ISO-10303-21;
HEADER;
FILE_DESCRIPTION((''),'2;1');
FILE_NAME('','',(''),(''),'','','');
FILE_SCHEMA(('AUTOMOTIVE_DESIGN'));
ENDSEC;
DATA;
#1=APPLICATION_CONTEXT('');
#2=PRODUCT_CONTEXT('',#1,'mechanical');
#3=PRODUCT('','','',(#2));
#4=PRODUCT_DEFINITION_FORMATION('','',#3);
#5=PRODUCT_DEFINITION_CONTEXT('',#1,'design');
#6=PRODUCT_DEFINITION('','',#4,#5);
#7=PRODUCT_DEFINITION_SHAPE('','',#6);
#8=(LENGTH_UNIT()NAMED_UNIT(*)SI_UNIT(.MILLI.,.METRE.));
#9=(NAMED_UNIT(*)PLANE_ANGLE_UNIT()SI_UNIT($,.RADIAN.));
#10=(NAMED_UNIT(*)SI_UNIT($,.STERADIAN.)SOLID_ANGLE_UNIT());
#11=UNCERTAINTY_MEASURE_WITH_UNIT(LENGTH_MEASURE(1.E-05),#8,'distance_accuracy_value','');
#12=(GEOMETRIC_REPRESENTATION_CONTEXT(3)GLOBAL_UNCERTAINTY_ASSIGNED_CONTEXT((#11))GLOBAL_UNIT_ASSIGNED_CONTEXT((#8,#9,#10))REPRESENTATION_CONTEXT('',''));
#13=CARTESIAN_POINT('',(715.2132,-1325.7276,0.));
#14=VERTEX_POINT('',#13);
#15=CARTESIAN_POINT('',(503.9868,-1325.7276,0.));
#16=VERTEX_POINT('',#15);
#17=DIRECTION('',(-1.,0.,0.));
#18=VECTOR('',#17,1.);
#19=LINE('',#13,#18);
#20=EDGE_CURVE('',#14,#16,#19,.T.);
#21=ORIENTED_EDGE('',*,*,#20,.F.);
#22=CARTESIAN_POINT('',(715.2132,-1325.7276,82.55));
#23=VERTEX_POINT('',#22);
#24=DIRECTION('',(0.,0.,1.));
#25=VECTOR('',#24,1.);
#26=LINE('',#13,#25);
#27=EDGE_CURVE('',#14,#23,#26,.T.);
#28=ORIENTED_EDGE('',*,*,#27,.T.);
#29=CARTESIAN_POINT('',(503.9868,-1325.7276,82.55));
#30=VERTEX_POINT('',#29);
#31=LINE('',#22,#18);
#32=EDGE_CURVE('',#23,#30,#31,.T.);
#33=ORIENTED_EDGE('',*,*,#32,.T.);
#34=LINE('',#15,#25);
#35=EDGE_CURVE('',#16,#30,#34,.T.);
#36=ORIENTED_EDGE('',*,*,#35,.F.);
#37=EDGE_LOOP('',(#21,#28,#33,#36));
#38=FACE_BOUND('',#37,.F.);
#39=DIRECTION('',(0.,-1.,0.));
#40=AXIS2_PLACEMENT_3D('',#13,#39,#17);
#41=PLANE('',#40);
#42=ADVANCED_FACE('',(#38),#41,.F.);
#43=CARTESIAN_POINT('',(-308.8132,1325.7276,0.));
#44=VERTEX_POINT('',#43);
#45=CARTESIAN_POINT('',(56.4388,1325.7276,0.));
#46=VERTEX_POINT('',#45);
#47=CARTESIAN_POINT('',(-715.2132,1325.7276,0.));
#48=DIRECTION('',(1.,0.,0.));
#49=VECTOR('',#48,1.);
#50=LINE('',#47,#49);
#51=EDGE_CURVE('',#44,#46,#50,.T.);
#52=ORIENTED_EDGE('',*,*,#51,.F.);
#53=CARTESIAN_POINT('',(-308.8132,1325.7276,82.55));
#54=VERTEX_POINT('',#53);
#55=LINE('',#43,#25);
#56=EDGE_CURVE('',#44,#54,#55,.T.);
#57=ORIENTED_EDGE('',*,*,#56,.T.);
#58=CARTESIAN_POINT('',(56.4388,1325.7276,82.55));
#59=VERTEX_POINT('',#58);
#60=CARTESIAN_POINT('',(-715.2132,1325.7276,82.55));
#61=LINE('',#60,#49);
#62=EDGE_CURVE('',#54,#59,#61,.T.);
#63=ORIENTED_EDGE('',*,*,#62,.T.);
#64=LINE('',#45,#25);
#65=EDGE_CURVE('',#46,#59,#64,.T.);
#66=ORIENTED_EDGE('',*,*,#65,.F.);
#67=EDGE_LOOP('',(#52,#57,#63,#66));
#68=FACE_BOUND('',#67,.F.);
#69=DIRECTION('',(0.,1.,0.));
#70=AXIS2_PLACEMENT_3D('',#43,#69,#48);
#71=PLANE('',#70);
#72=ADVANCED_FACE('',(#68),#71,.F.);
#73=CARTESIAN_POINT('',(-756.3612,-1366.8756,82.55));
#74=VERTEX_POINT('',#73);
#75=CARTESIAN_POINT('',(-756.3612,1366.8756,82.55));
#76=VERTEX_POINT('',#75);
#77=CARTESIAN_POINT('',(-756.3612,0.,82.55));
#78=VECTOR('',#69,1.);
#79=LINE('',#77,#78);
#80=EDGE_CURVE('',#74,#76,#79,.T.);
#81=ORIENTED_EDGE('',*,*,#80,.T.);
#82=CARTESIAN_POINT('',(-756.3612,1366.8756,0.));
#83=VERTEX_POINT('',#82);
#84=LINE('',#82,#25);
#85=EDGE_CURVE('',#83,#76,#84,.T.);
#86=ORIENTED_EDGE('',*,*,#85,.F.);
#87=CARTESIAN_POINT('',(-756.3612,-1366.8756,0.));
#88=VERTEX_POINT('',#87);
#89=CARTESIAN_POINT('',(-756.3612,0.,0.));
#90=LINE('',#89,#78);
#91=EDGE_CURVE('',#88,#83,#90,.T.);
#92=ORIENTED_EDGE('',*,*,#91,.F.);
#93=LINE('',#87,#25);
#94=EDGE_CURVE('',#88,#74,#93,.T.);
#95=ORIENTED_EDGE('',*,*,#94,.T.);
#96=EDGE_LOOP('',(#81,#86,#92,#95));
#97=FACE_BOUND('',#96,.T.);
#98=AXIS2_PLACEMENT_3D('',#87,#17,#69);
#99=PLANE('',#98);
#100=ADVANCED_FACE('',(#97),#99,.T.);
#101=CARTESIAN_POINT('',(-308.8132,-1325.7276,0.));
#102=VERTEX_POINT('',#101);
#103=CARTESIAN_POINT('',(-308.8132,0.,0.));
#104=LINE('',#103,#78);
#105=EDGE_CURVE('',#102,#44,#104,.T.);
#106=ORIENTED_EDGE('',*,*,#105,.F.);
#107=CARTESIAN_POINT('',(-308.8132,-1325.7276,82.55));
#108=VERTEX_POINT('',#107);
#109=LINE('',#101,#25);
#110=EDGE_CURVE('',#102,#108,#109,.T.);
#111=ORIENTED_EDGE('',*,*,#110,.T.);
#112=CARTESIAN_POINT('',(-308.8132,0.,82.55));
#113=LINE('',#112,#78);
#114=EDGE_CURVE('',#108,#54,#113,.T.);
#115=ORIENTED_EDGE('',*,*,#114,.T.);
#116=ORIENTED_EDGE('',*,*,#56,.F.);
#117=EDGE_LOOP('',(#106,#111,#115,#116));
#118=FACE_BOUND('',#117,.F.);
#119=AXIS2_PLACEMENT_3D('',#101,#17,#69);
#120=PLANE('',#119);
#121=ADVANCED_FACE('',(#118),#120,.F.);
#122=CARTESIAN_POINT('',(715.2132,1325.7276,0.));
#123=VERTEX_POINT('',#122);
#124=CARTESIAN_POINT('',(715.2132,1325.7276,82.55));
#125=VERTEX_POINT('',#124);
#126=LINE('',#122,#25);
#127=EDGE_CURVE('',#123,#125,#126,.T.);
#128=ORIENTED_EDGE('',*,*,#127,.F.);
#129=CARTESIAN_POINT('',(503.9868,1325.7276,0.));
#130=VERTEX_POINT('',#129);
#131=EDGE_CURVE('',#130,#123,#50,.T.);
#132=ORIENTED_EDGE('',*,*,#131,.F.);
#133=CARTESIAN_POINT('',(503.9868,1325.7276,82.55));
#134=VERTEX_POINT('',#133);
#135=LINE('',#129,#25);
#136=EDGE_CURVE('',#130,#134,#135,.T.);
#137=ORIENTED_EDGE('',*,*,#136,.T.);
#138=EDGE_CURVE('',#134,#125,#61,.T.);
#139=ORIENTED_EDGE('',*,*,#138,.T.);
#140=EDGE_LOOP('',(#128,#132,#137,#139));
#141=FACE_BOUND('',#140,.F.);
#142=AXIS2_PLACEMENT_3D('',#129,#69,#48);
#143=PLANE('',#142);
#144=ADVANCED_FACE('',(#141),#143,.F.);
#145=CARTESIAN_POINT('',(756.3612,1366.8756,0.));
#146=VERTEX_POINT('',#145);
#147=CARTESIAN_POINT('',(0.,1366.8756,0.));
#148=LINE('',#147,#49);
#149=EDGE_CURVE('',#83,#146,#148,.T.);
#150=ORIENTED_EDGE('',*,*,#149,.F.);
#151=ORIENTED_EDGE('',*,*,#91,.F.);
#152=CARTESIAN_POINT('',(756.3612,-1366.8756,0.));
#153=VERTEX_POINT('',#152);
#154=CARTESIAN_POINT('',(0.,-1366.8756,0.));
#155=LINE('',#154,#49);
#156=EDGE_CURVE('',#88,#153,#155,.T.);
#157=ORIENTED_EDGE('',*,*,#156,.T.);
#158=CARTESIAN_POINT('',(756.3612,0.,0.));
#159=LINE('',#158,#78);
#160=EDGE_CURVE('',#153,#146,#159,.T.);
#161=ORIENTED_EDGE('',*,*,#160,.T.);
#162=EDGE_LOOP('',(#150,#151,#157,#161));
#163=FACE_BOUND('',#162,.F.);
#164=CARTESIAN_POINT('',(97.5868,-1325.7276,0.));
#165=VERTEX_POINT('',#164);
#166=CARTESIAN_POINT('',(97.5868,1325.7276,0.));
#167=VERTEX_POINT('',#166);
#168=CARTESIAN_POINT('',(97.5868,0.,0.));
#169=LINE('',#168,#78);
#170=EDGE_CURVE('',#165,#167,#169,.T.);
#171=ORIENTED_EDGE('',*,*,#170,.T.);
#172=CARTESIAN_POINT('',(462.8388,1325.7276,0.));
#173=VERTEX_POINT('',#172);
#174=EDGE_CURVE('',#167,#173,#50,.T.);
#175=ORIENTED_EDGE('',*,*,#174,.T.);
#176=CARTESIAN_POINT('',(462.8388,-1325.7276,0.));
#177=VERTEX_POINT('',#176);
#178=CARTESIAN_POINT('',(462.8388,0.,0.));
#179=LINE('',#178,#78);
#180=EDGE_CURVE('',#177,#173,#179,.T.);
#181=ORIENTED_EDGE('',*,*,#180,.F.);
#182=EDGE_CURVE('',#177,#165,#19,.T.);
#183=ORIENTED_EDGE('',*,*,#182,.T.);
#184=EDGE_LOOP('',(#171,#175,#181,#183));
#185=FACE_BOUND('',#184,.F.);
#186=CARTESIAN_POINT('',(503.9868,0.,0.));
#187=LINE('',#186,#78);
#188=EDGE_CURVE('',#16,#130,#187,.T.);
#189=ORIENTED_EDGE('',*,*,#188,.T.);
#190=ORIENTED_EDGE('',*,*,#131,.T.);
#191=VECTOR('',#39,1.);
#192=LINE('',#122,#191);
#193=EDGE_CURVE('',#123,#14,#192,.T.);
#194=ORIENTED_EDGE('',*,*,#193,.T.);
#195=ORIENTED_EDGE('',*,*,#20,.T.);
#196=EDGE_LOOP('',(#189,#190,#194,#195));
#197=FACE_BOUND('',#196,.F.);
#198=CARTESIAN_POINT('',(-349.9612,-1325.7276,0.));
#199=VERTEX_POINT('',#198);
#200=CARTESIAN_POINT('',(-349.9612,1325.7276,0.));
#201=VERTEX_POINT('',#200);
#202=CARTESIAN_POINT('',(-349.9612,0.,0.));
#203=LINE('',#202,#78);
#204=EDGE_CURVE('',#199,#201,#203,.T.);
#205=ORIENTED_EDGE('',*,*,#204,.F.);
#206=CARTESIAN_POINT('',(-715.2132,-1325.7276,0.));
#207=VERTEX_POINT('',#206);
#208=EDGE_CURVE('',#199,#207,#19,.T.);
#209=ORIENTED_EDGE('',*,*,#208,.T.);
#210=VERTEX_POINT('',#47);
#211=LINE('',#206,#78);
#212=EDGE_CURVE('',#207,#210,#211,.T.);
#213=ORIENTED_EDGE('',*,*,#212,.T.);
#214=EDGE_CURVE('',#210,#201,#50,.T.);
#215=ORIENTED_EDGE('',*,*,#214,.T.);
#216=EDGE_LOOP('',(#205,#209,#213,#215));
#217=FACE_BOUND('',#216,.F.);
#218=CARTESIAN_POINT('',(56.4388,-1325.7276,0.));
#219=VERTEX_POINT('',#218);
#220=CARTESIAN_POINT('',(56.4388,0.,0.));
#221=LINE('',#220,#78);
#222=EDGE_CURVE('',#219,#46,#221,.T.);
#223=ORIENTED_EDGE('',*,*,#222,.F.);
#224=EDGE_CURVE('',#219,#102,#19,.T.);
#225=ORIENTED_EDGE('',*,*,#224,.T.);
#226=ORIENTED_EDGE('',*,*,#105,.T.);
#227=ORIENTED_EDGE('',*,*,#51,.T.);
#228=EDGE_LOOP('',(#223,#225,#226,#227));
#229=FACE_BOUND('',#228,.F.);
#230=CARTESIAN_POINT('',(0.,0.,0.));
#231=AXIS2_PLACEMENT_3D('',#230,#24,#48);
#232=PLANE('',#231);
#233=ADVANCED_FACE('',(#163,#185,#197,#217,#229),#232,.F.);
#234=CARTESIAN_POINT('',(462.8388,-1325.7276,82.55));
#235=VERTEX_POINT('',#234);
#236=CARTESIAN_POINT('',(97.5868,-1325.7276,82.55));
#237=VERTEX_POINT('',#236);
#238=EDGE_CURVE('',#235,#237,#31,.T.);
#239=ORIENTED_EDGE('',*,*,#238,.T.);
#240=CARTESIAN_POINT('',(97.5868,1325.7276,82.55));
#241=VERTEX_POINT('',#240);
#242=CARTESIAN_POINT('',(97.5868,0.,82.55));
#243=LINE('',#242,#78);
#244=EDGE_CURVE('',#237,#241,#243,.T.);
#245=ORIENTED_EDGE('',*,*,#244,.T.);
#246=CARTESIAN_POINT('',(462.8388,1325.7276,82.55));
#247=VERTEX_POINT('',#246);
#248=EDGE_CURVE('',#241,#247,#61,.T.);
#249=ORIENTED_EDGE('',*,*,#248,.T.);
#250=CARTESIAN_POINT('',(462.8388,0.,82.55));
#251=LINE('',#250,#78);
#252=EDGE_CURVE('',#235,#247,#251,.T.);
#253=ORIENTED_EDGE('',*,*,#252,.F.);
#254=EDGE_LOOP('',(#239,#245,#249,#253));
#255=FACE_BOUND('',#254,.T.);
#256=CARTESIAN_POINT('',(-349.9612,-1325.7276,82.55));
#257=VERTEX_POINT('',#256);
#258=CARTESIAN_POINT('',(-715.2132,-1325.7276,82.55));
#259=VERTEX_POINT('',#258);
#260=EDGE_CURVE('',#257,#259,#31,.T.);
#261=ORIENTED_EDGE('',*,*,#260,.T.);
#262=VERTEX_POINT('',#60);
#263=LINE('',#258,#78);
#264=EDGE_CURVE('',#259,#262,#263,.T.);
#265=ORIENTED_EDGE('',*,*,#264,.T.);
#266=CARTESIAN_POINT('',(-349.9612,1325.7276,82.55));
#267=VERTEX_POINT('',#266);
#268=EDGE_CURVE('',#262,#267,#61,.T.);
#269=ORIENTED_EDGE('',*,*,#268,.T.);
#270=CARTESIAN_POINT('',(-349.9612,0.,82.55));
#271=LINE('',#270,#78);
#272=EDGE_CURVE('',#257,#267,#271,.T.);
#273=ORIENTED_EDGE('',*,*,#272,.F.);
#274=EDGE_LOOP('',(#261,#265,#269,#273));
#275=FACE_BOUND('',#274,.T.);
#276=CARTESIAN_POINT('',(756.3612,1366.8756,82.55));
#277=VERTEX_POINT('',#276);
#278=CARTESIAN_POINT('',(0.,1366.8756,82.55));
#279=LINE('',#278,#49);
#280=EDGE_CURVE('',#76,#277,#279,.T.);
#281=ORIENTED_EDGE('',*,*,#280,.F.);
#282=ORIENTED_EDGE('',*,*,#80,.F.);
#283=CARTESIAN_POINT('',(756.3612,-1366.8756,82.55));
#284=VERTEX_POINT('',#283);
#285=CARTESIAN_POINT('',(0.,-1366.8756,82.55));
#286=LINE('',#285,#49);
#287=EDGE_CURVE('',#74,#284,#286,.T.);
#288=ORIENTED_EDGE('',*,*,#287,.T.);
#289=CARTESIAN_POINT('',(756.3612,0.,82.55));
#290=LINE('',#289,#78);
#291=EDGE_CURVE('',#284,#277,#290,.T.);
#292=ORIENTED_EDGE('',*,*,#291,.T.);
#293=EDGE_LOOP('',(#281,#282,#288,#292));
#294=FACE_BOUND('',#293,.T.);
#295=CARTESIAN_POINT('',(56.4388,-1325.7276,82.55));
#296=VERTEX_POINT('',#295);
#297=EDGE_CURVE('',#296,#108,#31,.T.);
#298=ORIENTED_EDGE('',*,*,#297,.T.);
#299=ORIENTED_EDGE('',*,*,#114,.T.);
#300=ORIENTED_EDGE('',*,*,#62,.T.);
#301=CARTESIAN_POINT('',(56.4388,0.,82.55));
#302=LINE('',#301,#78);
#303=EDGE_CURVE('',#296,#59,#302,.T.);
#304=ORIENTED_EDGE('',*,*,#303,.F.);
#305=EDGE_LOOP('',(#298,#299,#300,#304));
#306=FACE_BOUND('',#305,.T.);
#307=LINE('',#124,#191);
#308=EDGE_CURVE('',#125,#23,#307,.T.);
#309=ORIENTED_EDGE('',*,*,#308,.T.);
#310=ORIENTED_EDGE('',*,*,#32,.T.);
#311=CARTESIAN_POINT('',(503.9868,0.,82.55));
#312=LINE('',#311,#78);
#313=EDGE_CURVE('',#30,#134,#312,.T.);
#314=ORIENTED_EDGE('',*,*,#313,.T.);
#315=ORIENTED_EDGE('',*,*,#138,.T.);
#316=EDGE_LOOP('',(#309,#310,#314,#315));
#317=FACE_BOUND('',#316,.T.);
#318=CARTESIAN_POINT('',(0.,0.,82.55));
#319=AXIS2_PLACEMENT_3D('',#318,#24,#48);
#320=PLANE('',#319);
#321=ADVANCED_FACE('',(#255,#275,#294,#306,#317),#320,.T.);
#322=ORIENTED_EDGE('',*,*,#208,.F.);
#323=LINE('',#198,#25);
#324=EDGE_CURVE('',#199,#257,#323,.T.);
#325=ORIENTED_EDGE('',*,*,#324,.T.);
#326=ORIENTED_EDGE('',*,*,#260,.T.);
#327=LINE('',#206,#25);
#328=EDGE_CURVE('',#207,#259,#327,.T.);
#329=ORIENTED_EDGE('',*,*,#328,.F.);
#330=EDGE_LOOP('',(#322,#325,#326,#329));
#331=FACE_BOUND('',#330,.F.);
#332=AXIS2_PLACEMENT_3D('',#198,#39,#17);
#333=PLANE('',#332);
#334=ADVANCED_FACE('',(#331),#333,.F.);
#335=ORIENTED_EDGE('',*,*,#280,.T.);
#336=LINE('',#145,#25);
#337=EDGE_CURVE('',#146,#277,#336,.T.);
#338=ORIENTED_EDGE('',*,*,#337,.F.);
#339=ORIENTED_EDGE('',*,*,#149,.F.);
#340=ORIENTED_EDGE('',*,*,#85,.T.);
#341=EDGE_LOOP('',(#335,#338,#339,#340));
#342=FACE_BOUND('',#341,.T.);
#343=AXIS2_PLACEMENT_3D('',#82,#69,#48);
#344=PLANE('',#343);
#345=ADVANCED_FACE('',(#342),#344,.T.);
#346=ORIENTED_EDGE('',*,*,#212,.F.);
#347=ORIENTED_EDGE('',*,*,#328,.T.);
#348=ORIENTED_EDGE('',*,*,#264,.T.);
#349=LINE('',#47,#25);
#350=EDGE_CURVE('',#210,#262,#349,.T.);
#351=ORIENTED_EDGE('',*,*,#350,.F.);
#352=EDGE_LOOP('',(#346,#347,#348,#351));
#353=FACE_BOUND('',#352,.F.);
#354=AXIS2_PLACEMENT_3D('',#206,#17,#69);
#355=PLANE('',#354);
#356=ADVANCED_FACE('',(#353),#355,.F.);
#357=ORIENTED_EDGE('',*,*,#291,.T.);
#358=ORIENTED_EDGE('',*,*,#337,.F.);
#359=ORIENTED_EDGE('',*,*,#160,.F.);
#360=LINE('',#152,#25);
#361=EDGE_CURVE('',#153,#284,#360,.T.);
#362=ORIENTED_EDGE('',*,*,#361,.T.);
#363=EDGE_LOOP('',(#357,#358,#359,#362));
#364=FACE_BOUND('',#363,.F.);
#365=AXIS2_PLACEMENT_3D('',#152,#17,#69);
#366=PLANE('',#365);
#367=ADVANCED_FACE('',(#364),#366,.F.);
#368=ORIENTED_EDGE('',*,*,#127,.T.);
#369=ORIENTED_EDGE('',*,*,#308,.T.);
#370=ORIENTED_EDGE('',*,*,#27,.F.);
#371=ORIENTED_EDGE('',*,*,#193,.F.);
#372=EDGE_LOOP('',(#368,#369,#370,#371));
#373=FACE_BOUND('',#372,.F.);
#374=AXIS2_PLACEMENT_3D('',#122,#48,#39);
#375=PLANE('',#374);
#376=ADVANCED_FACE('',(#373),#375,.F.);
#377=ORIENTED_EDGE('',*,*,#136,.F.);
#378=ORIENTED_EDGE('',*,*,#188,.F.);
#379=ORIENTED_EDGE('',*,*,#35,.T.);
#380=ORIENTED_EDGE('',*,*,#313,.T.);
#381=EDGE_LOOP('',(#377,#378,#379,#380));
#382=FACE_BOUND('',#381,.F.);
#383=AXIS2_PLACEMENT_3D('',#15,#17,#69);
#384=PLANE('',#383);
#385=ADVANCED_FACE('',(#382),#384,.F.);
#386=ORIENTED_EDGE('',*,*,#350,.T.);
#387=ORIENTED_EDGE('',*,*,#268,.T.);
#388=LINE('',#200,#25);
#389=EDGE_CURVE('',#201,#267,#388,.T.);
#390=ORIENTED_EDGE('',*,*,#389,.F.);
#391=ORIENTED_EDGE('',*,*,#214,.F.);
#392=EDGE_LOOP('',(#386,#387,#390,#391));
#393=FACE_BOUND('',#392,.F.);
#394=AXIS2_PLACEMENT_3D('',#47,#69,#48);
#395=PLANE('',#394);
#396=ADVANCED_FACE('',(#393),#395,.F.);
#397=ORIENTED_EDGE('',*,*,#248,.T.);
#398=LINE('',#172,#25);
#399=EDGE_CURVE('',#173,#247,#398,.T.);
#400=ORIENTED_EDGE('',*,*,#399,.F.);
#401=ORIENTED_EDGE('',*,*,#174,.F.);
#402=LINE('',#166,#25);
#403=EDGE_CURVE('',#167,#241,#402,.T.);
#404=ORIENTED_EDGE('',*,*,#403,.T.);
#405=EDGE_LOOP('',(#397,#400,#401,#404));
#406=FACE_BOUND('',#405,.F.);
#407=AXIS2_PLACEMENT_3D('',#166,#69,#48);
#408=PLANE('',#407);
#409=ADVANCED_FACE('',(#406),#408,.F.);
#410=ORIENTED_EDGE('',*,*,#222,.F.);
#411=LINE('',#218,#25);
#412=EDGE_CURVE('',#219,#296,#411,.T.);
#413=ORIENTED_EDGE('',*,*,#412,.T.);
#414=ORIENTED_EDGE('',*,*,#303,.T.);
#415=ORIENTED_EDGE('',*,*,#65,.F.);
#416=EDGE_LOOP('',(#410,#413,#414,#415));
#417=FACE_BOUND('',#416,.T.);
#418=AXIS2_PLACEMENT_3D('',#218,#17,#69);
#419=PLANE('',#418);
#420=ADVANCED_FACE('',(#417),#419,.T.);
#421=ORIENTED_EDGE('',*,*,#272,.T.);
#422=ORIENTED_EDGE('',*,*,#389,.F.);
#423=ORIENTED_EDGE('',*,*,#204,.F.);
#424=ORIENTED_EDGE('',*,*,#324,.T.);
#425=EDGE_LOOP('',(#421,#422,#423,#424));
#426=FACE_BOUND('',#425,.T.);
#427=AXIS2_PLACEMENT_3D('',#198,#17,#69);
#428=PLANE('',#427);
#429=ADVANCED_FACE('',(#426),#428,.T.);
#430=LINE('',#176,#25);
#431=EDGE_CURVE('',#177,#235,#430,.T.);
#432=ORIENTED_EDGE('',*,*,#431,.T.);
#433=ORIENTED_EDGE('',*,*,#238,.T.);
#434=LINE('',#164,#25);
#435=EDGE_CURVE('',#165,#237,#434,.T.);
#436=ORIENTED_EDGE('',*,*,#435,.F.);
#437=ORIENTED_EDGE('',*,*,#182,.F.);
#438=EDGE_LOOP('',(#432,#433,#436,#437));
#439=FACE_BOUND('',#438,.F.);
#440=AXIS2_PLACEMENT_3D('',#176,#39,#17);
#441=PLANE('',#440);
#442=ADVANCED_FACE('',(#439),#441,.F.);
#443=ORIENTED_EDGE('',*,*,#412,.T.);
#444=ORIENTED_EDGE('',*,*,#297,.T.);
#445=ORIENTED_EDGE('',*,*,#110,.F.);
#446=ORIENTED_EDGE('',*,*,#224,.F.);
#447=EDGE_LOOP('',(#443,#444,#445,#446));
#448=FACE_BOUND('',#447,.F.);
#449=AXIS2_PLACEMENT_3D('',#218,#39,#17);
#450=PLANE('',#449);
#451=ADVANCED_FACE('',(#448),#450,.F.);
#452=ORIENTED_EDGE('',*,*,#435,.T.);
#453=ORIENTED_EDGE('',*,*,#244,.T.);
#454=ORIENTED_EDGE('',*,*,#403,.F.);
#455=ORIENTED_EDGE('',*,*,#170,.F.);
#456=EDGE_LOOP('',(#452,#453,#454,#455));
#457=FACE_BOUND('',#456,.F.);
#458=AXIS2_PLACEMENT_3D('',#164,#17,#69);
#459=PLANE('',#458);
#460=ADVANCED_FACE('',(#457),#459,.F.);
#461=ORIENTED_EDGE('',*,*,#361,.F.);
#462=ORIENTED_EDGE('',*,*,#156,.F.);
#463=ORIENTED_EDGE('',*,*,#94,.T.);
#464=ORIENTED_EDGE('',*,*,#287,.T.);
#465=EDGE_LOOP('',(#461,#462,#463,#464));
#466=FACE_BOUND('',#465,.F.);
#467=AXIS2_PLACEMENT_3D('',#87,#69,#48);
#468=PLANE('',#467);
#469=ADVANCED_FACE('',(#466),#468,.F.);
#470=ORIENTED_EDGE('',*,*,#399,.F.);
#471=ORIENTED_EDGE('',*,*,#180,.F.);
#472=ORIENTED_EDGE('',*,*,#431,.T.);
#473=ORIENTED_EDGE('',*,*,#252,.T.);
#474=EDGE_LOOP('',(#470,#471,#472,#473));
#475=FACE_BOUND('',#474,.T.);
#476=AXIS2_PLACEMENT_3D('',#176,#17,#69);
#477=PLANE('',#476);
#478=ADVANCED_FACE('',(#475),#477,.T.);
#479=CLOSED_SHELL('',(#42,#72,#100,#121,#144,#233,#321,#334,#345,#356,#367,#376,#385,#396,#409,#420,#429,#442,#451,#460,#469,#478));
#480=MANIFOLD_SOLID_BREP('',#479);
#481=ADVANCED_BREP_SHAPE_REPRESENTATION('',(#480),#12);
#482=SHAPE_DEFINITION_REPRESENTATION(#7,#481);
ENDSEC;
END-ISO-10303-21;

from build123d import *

# Parameters (mm, degrees)
F0_W     = 1512.7224
F0_H     = 2733.7512
F0_W_2   = 41.148
F0_H_2   = 2651.4552
F1_DEPTH = 82.55


# Not quite as in the source:
# - a feature names something its author has since deleted; it is built from what else it names


with BuildPart() as f1:
    # F0 (on Top) → F1 (new body)
    with BuildSketch(Plane.XY):
        Rectangle(F0_W, F0_H)
        Polygon((715.2132, 1325.7276), (715.2132, -1325.7276), (503.9868, -1325.7276), (462.8388, -1325.7276), (97.5868, -1325.7276), (56.4388, -1325.7276), (-308.8132, -1325.7276), (-349.9612, -1325.7276), (-715.2132, -1325.7276), (-715.2132, 1325.7276), (-349.9612, 1325.7276), (-308.8132, 1325.7276), (56.4388, 1325.7276), (97.5868, 1325.7276), (462.8388, 1325.7276), (503.9868, 1325.7276), align=None, mode=Mode.SUBTRACT)
        with Locations((483.4128, 0)):
            Rectangle(F0_W_2, F0_H_2)
        with Locations((77.0128, 0)):
            Rectangle(F0_W_2, F0_H_2)
        with Locations((-329.3872, 0)):
            Rectangle(F0_W_2, F0_H_2)
    extrude(amount=F1_DEPTH)


solid = f1.part
